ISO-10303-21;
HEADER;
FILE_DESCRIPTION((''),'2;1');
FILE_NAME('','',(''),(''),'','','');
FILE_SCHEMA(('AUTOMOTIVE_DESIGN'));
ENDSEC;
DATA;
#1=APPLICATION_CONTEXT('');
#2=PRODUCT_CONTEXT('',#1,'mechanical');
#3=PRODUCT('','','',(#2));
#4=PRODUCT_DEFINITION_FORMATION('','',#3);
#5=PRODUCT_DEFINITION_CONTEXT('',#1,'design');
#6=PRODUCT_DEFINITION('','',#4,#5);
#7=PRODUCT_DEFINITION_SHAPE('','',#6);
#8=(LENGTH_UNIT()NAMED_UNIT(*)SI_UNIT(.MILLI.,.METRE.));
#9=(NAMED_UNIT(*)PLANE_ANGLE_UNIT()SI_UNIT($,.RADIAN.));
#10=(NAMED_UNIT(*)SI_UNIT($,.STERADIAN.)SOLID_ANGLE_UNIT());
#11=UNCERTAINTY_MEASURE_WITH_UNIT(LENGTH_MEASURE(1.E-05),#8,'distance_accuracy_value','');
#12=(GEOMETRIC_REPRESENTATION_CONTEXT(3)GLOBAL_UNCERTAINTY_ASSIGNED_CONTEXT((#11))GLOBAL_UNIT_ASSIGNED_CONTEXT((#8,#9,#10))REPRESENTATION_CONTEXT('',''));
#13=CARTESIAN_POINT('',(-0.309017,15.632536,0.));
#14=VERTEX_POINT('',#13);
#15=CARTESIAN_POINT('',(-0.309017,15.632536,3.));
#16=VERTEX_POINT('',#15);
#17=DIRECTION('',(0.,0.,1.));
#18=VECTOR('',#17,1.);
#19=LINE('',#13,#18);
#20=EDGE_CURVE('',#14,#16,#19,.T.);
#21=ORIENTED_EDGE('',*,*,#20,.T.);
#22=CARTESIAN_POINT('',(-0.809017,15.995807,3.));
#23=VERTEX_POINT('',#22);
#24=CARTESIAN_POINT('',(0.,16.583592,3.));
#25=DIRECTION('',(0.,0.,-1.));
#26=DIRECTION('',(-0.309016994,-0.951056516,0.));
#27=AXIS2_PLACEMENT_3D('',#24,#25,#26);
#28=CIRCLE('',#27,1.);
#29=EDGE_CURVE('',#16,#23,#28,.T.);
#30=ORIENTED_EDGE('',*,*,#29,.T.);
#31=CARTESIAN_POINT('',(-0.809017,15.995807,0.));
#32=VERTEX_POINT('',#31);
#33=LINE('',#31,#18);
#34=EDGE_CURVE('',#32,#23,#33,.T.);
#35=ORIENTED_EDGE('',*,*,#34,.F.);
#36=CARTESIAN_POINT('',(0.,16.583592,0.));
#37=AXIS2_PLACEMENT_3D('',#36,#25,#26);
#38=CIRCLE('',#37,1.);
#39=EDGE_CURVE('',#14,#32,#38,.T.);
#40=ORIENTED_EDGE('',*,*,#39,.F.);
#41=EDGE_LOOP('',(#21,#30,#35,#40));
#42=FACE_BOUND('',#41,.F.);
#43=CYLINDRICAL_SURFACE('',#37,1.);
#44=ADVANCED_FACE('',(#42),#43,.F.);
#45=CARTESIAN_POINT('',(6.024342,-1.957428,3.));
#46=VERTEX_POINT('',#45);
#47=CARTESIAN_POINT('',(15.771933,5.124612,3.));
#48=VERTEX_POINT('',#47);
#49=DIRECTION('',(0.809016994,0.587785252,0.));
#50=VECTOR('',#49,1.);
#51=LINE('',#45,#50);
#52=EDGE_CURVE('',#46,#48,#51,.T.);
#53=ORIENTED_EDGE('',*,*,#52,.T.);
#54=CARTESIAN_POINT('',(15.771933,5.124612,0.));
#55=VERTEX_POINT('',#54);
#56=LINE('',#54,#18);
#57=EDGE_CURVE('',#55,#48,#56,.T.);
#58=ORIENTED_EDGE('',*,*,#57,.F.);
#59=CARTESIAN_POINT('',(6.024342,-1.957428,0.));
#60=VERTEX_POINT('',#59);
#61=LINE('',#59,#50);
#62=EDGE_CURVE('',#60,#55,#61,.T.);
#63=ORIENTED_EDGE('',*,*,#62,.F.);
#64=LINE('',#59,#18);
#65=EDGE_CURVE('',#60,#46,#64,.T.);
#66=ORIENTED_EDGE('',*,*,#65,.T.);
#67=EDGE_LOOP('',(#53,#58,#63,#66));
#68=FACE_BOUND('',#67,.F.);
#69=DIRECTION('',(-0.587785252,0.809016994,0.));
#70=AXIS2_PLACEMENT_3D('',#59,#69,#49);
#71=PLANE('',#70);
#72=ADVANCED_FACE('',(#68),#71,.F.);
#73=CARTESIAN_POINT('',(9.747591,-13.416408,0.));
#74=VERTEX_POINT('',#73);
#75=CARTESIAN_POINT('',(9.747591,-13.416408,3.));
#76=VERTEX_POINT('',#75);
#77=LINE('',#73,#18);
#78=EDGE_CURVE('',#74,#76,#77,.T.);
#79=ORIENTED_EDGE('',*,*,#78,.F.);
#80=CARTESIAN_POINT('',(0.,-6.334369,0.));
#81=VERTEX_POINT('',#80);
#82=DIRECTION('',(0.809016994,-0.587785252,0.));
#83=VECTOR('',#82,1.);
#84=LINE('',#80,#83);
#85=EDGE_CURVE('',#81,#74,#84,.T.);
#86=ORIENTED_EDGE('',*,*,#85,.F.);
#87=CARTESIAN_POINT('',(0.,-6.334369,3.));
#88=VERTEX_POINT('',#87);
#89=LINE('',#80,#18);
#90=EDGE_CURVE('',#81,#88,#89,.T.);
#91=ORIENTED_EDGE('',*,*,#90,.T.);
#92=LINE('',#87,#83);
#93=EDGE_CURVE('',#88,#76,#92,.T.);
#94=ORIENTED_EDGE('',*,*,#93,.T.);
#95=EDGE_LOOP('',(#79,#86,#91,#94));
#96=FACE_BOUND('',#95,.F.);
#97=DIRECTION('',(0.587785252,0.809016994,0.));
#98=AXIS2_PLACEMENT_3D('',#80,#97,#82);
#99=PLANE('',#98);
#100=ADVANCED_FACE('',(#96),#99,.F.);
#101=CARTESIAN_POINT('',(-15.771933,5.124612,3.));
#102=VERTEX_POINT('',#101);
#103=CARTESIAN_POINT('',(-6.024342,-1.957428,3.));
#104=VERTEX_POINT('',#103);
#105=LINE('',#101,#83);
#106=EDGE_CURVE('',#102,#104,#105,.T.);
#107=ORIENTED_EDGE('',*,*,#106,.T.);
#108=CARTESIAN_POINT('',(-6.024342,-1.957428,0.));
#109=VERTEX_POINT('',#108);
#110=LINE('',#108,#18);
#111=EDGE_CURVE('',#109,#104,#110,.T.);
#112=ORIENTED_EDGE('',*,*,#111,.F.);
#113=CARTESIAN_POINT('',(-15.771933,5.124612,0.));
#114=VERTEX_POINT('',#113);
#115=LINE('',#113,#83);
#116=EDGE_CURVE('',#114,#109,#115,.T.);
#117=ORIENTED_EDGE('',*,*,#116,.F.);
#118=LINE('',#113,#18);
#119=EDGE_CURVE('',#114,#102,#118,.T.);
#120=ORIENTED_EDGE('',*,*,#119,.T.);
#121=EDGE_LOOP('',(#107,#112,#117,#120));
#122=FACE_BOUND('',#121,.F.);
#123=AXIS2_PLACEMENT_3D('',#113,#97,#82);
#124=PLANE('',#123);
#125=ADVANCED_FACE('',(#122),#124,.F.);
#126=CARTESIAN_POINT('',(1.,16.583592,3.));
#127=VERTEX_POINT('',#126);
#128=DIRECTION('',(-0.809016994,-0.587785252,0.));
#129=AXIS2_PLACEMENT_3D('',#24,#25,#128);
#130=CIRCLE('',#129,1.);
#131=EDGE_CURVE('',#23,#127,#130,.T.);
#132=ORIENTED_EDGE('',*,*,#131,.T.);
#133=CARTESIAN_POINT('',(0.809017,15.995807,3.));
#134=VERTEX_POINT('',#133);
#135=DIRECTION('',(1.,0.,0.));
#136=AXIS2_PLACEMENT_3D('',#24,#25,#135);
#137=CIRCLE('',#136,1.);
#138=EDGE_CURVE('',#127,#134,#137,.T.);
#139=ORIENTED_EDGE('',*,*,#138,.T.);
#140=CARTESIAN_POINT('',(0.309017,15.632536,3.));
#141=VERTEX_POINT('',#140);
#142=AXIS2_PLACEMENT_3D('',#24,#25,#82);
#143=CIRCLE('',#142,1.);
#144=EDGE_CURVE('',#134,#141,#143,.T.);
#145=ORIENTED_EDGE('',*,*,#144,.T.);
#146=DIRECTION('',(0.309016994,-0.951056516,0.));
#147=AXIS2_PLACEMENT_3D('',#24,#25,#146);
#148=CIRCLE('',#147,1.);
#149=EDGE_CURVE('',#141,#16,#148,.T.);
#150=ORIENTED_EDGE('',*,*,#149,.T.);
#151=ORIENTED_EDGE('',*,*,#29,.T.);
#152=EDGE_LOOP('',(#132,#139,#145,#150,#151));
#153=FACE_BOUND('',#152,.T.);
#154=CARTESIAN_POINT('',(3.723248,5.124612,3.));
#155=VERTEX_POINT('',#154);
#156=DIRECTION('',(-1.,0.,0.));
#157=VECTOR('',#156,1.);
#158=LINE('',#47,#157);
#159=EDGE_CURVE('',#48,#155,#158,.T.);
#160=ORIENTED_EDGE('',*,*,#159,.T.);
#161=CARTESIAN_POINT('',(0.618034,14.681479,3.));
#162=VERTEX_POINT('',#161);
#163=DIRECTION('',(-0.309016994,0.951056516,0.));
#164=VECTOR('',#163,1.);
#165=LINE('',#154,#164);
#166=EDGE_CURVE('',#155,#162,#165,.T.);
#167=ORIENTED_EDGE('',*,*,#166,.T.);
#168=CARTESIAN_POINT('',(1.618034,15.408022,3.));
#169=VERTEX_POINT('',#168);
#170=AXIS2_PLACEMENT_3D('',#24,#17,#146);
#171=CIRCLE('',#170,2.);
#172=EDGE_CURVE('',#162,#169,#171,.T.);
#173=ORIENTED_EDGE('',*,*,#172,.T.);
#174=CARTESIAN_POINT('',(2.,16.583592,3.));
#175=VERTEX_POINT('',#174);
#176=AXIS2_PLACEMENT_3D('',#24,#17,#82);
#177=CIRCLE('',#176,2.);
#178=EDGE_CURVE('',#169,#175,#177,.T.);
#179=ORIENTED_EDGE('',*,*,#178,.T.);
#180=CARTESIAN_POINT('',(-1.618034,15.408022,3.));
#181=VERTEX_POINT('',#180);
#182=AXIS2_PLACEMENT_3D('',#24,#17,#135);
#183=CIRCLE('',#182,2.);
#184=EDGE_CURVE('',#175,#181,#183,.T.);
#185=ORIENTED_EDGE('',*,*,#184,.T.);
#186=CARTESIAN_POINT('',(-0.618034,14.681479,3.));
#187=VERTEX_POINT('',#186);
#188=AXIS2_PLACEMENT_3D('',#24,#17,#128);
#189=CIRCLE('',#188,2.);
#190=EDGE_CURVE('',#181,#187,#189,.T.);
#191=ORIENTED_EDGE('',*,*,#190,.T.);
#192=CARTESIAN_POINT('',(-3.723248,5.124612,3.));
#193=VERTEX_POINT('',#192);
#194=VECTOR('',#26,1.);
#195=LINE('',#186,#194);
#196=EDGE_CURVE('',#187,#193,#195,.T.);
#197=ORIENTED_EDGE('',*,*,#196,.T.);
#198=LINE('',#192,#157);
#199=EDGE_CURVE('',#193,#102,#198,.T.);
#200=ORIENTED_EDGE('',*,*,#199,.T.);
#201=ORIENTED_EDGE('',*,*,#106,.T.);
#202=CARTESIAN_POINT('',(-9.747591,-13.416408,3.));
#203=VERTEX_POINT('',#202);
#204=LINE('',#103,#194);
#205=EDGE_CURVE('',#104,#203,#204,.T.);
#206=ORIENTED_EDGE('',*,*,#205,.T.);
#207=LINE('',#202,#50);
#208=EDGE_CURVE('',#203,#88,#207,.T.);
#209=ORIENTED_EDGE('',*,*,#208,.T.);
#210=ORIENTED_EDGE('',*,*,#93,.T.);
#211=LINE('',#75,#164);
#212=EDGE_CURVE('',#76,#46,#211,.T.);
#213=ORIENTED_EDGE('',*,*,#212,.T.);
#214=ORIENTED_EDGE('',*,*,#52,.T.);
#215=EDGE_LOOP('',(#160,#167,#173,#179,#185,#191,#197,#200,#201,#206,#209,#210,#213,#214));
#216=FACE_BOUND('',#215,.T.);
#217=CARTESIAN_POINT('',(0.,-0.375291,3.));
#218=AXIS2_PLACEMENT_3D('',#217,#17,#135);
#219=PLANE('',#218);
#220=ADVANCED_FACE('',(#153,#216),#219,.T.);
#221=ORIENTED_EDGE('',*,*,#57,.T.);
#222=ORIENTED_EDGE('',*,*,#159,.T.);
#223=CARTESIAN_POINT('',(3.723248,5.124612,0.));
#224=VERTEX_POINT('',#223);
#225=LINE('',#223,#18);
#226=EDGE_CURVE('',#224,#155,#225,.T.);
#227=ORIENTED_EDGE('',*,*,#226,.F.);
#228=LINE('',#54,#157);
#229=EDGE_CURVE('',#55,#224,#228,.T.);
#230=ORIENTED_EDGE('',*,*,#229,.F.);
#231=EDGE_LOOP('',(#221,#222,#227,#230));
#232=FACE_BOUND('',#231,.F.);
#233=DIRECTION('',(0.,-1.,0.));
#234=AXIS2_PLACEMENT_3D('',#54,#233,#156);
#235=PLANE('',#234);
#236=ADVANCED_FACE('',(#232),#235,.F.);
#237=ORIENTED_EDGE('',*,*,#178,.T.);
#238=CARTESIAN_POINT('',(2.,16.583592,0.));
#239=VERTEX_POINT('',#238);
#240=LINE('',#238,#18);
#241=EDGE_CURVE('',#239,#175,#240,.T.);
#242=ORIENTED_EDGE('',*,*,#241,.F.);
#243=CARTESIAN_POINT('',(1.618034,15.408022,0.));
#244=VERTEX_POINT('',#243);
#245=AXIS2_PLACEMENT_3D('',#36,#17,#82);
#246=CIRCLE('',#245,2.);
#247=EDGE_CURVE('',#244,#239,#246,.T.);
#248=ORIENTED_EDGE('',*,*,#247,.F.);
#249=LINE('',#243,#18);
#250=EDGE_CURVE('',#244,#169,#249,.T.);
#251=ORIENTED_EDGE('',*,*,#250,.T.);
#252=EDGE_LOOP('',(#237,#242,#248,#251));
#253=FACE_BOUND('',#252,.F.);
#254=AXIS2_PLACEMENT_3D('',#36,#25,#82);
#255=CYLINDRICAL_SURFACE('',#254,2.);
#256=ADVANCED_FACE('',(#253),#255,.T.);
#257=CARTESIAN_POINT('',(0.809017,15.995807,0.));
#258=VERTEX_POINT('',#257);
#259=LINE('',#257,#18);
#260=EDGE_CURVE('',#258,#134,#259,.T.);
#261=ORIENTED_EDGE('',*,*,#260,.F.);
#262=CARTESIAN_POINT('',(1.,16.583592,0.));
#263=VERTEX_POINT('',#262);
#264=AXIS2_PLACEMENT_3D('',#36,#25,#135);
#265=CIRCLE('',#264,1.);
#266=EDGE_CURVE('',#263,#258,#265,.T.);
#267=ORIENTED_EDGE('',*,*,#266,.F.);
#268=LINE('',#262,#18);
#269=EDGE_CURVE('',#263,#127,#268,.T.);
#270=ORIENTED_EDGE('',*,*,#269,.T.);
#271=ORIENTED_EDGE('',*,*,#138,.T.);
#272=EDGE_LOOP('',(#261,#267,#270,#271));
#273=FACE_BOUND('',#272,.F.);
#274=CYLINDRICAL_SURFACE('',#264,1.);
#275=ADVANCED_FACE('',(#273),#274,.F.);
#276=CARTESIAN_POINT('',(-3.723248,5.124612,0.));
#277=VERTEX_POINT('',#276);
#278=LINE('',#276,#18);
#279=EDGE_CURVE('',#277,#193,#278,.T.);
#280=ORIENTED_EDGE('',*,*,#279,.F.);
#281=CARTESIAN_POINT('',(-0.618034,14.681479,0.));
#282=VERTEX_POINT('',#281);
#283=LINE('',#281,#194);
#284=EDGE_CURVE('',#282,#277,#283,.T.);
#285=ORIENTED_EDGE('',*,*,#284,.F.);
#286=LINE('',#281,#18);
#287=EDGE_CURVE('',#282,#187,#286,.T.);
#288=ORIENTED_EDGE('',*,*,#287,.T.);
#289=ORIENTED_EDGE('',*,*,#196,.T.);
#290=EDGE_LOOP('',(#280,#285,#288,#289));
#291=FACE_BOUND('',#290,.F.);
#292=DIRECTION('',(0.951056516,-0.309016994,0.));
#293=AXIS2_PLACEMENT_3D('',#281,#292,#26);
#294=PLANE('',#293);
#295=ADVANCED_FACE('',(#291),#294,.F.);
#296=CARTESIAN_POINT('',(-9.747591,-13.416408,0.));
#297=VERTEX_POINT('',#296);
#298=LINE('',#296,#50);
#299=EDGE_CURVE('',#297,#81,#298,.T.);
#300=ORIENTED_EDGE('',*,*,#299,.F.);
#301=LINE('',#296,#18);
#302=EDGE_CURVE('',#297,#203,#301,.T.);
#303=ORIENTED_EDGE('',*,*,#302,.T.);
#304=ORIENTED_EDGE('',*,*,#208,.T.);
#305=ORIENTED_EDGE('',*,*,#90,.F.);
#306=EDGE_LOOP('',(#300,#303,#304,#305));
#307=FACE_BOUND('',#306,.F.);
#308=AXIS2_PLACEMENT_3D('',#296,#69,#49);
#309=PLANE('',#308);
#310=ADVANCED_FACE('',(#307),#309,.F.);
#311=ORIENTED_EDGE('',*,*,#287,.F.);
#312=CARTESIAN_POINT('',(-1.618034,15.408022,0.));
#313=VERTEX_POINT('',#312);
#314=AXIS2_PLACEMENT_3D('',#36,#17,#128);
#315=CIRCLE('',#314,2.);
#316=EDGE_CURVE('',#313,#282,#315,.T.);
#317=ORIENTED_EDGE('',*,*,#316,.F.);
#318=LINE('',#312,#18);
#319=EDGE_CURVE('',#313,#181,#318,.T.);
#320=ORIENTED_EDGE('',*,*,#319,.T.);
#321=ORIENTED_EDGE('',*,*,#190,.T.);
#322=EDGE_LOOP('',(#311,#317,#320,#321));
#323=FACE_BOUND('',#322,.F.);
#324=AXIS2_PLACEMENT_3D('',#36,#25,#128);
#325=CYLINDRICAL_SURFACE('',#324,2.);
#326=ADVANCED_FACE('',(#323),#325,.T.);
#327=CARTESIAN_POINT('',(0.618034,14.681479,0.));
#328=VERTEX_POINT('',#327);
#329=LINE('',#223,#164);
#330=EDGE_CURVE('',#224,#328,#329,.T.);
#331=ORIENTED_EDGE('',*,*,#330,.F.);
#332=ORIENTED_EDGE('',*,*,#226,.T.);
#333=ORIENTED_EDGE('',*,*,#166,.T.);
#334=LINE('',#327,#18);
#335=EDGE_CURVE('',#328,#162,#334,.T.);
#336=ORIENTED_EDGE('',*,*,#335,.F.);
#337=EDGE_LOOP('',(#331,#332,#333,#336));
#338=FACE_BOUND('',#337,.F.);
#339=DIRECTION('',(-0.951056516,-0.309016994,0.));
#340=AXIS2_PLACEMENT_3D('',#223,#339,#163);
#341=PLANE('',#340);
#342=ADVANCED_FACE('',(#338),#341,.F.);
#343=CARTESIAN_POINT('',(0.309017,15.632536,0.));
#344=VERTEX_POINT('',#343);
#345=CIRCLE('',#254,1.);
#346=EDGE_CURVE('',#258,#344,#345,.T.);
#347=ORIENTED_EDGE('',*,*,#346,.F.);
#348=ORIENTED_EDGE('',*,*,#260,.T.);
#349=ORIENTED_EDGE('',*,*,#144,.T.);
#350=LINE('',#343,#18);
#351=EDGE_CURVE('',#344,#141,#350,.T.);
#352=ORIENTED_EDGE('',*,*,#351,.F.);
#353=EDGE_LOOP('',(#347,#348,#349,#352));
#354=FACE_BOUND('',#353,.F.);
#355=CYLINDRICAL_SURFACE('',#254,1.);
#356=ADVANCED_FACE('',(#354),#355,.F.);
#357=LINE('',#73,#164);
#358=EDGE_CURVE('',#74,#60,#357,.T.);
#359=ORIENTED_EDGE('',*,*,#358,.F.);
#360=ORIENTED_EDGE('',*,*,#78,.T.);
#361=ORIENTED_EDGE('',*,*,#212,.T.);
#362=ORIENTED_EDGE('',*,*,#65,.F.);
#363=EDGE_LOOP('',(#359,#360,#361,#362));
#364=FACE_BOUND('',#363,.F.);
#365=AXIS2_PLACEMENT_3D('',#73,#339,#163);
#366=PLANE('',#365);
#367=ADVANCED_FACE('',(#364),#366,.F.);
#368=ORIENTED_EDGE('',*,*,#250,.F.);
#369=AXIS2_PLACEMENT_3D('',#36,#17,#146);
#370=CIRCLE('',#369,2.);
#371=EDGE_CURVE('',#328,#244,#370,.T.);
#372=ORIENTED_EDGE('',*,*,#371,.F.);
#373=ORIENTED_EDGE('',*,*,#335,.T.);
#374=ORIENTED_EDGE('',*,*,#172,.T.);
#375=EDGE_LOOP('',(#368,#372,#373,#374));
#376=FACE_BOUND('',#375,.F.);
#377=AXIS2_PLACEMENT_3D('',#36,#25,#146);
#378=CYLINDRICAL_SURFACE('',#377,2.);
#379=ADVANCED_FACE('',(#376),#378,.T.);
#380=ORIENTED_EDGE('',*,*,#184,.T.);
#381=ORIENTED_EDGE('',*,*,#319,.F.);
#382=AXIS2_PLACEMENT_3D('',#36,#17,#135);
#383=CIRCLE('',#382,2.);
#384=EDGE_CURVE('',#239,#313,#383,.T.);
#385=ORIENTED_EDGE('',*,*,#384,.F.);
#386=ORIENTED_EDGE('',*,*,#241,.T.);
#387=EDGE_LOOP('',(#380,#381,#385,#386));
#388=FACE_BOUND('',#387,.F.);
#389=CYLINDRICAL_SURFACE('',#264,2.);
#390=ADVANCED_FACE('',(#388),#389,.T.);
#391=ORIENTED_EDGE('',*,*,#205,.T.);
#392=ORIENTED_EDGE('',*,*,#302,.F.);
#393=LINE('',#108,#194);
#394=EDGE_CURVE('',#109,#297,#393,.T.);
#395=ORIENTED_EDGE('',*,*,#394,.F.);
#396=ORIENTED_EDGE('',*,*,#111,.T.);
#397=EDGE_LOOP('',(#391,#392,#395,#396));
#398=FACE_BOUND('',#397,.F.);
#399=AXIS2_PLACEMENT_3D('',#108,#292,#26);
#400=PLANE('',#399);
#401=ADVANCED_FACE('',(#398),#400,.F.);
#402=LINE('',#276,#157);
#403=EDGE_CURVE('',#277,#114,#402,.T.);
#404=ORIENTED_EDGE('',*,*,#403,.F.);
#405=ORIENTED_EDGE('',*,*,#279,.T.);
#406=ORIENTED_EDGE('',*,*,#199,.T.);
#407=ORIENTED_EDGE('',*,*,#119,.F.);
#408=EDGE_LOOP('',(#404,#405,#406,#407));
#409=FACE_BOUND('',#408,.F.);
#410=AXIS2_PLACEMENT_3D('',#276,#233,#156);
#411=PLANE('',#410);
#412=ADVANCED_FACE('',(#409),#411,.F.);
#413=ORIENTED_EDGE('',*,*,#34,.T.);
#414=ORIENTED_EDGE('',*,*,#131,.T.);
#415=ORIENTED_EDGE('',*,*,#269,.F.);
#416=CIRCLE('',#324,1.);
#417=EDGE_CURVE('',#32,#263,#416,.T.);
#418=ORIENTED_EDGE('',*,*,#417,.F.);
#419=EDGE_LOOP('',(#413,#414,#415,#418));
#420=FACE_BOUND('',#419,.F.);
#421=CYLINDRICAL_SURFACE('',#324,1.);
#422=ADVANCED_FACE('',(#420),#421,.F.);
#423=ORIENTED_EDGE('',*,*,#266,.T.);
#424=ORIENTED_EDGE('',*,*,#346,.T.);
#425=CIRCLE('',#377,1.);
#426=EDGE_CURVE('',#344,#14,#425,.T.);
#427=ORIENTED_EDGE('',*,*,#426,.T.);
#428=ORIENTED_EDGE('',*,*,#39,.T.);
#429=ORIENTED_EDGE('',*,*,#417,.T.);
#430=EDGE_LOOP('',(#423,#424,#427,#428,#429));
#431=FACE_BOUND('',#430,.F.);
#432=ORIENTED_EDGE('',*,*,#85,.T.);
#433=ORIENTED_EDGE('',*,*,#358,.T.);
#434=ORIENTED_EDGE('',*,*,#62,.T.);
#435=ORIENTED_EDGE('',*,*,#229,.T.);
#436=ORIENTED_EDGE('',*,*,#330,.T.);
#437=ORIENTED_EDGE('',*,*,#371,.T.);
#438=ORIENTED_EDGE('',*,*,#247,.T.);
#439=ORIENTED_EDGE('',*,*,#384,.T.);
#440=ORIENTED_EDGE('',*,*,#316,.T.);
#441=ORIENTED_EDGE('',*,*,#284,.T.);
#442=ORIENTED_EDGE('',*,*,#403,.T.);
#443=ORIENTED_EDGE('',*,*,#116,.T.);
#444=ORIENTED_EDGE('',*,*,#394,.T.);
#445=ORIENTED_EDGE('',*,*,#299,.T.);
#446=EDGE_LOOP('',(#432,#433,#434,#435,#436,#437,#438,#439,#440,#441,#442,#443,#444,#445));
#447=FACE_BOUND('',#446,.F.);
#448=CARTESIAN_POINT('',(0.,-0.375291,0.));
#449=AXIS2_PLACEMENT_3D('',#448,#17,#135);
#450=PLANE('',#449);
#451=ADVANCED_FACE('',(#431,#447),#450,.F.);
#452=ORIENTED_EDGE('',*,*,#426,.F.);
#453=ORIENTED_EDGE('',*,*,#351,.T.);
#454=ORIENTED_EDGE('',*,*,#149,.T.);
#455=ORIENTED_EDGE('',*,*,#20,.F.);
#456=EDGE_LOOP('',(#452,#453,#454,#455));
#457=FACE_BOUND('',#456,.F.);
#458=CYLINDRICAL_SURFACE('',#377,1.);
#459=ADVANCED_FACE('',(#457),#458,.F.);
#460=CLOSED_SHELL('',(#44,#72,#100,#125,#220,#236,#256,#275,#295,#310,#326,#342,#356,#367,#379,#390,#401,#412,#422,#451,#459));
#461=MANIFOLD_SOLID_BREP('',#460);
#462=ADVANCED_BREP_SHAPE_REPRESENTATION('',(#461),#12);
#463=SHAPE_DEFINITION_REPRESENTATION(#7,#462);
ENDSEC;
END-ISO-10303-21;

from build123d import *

# Parameters (mm, degrees)
F1_DEPTH = 3


# Not quite as in the source:
# - a feature names something its author has since deleted; it is built from what else it names


with BuildPart() as f1:
    # F0 (on Top) → F1 (new body)
    with BuildSketch(Plane.XY):
        with BuildLine():
            ThreePointArc((0.6180339887, 14.6814791024), (0, 14.583592135), (-0.6180339887, 14.6814791024))
            Line((-0.6180339887, 14.6814791024), (-3.7232484104, 5.1246117975))
            Line((-3.7232484104, 5.1246117975), (-15.7719333636, 5.1246117975))
            Line((-15.7719333636, 5.1246117975), (-6.0243424766, -1.9574275275))
            Line((-6.0243424766, -1.9574275275), (-9.747590887, -13.416407865))
            Line((-9.747590887, -13.416407865), (0, -6.33436854))
            Line((0, -6.33436854), (9.747590887, -13.416407865))
            Line((9.747590887, -13.416407865), (6.0243424766, -1.9574275275))
            Line((6.0243424766, -1.9574275275), (15.7719333636, 5.1246117975))
            Line((15.7719333636, 5.1246117975), (3.7232484104, 5.1246117975))
            Line((3.7232484104, 5.1246117975), (0.6180339887, 14.6814791024))
        make_face()
        with BuildLine():
            ThreePointArc((0.3090169944, 15.6325356187), (0, 15.583592135), (-0.3090169944, 15.6325356187))
            Line((-0.3090169944, 15.6325356187), (-0.6180339887, 14.6814791024))
            ThreePointArc((-0.6180339887, 14.6814791024), (0, 14.583592135), (0.6180339887, 14.6814791024))
            Line((0.6180339887, 14.6814791024), (0.3090169944, 15.6325356187))
        make_face()
        with BuildLine():
            Line((1.6180339887, 15.4080216304), (0.8090169944, 15.9958068827))
            ThreePointArc((0.8090169944, 15.9958068827), (0.5877852523, 15.7745751406), (0.3090169944, 15.6325356187))
            Line((0.3090169944, 15.6325356187), (0.6180339887, 14.6814791024))
            ThreePointArc((0.6180339887, 14.6814791024), (1.1755705046, 14.9655581463), (1.6180339887, 15.4080216304))
        make_face()
        with BuildLine():
            ThreePointArc((1, 16.583592135), (0.9510565163, 16.2745751406), (0.8090169944, 15.9958068827))
            Line((0.8090169944, 15.9958068827), (1.6180339887, 15.4080216304))
            ThreePointArc((1.6180339887, 15.4080216304), (1.9021130326, 15.9655581463), (2, 16.583592135))
            ThreePointArc((2, 16.583592135), (-0.6180339887, 18.4857051676), (-1.6180339887, 15.4080216304))
            Line((-1.6180339887, 15.4080216304), (-0.8090169944, 15.9958068827))
            ThreePointArc((-0.8090169944, 15.9958068827), (-0.3090169944, 17.5346486513), (1, 16.583592135))
        make_face()
        with BuildLine():
            ThreePointArc((-0.3090169944, 15.6325356187), (-0.5877852523, 15.7745751406), (-0.8090169944, 15.9958068827))
            Line((-0.8090169944, 15.9958068827), (-1.6180339887, 15.4080216304))
            ThreePointArc((-1.6180339887, 15.4080216304), (-1.1755705046, 14.9655581463), (-0.6180339887, 14.6814791024))
            Line((-0.6180339887, 14.6814791024), (-0.3090169944, 15.6325356187))
        make_face()
    extrude(amount=F1_DEPTH)


solid = f1.part
